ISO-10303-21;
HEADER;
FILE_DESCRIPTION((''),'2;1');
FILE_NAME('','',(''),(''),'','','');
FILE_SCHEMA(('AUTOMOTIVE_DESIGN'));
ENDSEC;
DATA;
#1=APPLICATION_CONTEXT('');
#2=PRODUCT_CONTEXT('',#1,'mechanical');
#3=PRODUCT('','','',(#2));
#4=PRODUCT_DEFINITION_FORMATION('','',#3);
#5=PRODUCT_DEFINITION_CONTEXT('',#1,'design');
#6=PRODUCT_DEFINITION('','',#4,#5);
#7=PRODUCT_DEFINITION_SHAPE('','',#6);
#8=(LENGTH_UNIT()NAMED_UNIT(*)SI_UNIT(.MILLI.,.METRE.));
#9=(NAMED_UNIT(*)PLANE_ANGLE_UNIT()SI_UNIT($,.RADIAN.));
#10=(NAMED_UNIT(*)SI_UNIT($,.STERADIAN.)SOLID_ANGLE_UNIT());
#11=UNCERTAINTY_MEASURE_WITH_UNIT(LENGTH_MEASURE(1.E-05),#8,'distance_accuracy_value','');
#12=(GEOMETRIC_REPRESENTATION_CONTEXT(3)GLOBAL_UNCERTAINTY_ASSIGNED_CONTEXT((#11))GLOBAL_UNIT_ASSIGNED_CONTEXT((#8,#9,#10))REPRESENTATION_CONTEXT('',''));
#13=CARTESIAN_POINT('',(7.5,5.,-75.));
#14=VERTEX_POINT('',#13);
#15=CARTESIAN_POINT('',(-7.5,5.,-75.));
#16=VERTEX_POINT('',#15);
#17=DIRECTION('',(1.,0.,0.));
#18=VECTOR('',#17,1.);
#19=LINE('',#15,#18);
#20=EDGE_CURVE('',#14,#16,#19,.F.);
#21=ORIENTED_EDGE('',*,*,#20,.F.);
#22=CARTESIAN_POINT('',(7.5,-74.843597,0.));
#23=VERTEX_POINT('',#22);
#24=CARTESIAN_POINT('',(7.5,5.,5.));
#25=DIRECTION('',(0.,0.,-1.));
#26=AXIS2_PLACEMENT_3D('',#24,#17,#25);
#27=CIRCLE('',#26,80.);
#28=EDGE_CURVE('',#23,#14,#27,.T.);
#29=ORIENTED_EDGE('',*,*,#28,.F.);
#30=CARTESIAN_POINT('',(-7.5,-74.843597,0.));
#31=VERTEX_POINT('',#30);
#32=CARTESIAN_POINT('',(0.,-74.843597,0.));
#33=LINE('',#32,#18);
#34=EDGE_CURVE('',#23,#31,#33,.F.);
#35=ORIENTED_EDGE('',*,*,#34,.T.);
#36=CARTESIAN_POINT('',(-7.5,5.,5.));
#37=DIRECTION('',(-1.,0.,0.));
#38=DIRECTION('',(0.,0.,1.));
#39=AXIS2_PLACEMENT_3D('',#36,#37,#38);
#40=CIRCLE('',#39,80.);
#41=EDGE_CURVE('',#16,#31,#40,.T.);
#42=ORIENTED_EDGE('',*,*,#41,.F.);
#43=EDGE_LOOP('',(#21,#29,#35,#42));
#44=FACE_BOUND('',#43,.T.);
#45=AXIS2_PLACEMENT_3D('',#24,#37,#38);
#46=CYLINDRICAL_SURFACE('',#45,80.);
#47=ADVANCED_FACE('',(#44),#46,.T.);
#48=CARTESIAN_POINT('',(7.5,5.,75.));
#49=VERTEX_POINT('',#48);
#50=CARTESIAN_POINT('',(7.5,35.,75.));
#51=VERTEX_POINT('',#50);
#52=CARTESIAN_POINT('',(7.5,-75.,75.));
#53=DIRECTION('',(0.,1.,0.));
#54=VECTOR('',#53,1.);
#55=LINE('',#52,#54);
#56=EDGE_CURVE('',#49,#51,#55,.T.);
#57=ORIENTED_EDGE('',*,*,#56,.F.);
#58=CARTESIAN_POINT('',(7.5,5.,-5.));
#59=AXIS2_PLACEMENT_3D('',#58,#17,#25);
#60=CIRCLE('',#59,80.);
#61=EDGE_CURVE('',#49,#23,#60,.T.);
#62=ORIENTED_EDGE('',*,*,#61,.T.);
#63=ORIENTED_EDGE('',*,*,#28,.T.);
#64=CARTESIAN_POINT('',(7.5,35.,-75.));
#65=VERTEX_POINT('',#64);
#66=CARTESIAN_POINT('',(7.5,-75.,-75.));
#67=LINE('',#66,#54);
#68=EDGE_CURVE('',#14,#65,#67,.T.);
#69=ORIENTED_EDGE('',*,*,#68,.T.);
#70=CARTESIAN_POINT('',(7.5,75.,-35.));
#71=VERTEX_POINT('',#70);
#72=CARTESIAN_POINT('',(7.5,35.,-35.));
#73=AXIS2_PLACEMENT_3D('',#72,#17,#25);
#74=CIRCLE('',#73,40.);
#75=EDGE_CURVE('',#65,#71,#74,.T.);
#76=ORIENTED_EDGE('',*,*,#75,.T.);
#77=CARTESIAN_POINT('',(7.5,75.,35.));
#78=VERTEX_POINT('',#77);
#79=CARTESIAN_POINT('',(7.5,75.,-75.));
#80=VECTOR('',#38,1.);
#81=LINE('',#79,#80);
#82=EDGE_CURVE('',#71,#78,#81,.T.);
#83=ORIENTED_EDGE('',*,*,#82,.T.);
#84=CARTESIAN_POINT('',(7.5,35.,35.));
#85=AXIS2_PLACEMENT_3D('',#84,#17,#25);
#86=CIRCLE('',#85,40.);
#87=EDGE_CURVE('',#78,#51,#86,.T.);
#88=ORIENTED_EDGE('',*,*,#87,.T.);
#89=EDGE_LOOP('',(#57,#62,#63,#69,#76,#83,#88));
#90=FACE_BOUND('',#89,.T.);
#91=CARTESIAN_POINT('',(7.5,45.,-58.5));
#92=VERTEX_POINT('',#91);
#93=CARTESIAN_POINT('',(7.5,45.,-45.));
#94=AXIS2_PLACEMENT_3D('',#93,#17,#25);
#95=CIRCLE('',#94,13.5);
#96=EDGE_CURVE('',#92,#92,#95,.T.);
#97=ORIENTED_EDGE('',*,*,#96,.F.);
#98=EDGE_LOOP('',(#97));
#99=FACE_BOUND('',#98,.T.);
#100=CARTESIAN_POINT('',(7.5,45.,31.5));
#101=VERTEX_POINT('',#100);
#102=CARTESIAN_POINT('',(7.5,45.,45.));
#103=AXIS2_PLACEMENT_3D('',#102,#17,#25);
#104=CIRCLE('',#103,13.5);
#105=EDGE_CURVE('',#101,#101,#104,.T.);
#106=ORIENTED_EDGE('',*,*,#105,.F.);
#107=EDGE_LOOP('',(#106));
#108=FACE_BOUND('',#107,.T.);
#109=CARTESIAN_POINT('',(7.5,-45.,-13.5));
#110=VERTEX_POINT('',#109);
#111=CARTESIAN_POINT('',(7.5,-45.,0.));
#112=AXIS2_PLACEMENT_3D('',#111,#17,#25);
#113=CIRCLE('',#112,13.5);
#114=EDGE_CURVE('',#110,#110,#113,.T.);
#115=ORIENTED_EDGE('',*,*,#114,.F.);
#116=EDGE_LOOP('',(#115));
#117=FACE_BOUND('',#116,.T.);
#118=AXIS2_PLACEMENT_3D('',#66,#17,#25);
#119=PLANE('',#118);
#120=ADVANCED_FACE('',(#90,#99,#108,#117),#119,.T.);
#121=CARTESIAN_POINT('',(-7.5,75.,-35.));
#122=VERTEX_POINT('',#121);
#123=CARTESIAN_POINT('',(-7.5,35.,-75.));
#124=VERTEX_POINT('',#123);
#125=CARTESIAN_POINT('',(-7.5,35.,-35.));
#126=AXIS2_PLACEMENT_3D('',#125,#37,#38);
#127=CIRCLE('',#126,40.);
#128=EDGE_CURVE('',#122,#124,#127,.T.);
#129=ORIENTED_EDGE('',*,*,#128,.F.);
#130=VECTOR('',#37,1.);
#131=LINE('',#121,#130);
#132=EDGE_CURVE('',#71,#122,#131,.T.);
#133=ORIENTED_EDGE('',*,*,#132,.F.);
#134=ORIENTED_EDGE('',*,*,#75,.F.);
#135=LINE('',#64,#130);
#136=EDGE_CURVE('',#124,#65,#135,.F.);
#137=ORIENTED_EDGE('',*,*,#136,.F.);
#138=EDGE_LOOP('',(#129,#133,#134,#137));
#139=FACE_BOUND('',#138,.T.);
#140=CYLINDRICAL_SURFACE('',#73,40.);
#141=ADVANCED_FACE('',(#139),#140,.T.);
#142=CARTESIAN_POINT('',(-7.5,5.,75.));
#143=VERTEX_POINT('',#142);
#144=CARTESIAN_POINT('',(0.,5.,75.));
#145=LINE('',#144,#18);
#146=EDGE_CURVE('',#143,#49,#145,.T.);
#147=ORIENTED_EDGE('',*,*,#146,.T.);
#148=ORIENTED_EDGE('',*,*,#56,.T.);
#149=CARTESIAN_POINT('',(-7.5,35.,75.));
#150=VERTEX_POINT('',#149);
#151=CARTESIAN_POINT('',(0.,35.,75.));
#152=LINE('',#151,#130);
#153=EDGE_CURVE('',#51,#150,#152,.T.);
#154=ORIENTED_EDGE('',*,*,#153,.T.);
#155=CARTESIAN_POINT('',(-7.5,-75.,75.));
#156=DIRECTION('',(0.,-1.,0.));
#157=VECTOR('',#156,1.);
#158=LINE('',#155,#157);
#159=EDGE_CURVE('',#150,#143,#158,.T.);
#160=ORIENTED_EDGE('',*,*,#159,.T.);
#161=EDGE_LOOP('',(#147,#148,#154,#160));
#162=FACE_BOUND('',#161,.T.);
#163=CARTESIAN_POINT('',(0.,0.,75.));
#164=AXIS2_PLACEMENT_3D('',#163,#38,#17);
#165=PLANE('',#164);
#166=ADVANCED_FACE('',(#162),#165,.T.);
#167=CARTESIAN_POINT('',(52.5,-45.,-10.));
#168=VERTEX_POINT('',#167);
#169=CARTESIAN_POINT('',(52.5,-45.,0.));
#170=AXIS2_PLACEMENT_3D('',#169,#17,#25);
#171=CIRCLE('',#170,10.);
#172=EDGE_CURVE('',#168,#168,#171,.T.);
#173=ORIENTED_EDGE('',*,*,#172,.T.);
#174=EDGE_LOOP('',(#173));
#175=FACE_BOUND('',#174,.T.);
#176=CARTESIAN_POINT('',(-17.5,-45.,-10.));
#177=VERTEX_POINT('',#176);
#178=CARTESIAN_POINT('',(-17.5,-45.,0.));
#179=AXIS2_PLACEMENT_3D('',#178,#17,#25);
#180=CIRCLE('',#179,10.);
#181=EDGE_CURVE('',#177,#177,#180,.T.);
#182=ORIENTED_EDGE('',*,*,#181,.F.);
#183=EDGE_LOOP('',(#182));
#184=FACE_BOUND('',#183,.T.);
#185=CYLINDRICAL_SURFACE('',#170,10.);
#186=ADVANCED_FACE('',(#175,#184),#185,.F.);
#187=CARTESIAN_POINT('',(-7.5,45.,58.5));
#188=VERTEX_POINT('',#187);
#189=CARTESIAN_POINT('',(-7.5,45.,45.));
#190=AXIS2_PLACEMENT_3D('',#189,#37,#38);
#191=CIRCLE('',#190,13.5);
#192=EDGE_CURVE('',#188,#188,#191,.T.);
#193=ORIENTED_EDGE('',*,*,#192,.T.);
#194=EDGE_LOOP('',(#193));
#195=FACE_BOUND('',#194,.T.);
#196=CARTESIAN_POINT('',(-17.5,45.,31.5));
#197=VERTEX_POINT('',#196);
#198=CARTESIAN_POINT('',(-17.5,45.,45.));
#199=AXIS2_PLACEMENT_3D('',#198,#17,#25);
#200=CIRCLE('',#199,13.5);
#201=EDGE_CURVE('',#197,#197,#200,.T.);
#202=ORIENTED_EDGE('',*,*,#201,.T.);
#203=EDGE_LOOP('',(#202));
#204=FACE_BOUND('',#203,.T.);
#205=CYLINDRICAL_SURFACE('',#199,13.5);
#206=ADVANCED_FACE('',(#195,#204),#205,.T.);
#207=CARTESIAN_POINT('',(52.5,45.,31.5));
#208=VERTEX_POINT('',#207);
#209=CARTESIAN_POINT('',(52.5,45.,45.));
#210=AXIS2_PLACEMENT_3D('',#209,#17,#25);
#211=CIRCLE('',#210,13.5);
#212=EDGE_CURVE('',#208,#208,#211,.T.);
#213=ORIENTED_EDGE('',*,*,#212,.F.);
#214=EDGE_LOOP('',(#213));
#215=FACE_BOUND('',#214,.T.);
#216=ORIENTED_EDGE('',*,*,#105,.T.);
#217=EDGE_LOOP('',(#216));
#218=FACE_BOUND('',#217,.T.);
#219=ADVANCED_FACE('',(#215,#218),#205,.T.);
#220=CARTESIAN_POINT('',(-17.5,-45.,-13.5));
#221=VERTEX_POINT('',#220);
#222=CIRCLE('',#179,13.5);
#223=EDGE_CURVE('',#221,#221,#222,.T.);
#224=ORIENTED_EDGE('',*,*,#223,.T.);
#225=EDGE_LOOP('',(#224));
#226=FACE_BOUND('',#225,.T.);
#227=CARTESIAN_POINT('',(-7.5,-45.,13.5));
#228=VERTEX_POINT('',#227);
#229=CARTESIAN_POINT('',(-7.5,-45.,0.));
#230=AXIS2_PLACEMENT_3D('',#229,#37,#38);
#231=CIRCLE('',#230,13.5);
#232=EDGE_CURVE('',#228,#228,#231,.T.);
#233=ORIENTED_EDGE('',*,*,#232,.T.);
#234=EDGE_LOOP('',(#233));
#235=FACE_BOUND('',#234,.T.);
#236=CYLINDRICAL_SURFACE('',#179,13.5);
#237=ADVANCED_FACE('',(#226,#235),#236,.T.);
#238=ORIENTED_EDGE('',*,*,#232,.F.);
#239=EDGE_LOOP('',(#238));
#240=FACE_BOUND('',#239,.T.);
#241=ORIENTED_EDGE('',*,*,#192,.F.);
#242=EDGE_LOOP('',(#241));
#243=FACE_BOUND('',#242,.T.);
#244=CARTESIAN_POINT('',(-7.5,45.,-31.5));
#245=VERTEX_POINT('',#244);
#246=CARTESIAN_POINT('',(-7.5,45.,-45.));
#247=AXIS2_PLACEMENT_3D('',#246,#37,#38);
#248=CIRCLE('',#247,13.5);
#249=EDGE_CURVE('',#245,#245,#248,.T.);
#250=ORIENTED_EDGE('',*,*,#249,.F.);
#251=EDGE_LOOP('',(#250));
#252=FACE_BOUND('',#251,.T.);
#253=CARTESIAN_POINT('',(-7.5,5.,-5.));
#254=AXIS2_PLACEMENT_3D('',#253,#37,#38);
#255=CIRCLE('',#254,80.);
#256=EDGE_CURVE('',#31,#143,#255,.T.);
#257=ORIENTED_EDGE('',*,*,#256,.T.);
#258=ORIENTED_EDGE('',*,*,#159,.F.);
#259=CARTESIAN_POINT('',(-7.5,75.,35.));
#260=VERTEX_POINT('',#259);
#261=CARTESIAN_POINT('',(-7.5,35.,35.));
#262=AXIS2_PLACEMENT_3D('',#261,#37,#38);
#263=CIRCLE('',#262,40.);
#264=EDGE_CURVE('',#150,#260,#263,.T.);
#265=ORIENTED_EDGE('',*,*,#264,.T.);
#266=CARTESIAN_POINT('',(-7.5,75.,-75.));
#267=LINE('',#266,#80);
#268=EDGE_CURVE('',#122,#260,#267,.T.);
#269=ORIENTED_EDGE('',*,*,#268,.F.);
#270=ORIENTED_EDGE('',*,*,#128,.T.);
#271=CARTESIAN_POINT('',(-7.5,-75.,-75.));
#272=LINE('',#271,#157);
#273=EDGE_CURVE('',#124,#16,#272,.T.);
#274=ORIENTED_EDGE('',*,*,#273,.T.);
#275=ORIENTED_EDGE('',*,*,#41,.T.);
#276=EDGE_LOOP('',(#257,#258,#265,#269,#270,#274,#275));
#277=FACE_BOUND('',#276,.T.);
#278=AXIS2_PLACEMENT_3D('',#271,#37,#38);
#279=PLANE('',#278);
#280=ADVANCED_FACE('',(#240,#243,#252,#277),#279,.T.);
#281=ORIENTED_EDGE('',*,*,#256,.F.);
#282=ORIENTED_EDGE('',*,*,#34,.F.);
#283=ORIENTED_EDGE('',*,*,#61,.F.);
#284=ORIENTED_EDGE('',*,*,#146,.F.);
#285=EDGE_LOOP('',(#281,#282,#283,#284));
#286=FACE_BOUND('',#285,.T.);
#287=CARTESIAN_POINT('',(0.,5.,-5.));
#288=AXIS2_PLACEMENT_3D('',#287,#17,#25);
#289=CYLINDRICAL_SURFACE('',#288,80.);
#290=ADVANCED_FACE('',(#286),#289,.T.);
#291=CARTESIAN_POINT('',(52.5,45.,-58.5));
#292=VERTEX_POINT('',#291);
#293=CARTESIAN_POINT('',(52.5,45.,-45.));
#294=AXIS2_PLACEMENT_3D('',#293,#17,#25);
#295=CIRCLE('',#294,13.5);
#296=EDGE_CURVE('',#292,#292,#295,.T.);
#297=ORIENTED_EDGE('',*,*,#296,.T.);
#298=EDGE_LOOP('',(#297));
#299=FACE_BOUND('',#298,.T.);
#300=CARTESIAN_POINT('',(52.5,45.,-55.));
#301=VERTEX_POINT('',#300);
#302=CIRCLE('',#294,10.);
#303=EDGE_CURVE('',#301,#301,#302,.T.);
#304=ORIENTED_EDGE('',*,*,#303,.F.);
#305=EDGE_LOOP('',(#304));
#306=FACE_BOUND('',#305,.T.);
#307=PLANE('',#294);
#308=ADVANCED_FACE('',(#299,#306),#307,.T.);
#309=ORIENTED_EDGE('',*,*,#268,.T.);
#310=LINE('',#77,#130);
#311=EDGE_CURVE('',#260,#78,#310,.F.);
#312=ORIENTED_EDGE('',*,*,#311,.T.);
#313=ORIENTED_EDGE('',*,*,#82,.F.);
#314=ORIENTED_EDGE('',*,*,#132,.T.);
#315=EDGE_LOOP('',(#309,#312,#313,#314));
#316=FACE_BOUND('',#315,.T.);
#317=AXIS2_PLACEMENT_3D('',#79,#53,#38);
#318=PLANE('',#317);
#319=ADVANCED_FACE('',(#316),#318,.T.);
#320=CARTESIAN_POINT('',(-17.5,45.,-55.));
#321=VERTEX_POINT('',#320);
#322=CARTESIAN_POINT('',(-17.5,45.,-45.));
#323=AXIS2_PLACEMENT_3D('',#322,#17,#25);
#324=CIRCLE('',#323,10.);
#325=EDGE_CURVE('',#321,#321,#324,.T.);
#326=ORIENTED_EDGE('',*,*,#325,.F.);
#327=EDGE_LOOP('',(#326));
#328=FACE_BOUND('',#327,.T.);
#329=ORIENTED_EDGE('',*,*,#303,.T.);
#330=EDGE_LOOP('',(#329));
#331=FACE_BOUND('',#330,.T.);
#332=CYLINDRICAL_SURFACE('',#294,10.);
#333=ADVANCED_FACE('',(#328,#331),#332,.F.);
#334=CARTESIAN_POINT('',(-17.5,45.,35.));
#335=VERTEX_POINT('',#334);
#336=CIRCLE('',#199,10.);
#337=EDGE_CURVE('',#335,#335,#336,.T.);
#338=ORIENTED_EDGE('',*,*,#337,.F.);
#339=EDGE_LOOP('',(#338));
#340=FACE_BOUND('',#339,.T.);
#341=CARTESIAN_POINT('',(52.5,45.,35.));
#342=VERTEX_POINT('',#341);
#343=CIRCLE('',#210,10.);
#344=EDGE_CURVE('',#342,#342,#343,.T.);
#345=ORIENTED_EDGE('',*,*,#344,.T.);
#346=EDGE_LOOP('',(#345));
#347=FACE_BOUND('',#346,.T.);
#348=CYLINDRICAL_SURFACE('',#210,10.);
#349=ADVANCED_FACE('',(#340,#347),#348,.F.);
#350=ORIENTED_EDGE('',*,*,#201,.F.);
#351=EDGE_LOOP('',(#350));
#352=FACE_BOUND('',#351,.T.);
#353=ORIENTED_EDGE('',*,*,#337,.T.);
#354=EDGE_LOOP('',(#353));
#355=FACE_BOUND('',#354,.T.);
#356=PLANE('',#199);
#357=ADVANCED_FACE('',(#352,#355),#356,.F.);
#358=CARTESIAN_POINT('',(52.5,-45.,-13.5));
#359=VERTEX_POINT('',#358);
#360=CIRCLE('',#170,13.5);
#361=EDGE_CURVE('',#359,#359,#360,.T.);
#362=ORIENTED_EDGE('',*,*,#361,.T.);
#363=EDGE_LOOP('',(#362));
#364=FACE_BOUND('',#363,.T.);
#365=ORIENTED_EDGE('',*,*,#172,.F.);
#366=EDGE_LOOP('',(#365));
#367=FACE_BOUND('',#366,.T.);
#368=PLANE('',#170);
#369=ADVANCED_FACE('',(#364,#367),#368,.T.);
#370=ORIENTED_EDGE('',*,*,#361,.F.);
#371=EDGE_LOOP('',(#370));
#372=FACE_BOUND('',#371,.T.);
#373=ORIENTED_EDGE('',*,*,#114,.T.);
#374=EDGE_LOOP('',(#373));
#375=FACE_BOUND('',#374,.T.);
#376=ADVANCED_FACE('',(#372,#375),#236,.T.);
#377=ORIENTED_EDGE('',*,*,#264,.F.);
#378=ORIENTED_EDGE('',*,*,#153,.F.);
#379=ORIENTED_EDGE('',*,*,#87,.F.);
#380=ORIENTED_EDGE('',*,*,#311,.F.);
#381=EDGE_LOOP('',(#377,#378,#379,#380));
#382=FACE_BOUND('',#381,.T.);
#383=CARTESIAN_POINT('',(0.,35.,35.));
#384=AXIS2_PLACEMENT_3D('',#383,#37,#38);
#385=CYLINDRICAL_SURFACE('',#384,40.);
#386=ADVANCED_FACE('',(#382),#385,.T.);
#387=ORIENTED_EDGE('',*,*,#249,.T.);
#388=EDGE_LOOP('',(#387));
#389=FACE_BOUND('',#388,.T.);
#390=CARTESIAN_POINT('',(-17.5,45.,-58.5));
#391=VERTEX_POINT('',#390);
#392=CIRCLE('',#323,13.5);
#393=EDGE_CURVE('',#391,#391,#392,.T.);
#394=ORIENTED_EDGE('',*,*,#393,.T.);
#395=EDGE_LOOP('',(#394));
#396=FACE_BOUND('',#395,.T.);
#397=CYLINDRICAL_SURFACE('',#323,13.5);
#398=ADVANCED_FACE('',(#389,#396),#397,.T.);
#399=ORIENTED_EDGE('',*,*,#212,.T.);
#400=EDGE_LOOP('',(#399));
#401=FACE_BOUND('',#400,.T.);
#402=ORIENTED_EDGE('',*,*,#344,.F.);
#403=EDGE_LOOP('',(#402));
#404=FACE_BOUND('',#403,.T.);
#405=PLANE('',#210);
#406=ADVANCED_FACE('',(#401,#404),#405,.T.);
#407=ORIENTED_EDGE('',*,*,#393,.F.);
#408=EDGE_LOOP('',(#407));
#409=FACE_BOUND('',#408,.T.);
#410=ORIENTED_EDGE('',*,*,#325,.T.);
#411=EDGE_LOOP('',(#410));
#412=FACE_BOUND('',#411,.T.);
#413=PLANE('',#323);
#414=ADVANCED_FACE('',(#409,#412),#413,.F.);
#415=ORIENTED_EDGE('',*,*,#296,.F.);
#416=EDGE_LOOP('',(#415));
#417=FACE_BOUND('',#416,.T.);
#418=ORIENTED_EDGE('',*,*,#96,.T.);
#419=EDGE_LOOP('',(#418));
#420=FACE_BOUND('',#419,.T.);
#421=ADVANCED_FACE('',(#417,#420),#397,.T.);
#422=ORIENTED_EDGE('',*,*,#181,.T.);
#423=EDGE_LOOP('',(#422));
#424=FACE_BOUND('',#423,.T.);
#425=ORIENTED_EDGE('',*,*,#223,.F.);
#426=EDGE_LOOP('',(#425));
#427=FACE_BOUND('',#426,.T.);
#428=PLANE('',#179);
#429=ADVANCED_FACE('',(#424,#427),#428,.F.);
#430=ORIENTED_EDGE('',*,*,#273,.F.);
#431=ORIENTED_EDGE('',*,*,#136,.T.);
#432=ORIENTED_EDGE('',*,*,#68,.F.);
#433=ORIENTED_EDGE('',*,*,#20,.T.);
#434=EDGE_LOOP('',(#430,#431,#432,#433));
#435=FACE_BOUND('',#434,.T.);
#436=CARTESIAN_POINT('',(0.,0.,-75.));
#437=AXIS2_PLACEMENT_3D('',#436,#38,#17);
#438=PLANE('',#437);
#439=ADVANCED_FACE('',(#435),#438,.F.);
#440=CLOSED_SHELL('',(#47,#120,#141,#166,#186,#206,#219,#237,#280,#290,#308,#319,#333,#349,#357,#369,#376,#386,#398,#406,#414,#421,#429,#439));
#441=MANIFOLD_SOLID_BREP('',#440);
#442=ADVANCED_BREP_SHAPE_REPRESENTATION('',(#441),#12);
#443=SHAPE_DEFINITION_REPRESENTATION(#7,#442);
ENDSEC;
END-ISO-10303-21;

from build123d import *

# Parameters (mm, degrees)
BOSS_EXTRUDE1_DEPTH      = 75
BOSS_EXTRUDE1_DEPTH_BACK = 75
SKETCH1_W                = 15
SKETCH1_H                = 150
BOSS_EXTRUDE2_DEPTH      = 45
BOSS_EXTRUDE2_DEPTH_BACK = 25
SKETCH2_R                = 13.5
F_20_0MM_DOWEL_HOLE1_D   = 20
FILLET2_R                = 80
FILLET3_R                = 40


with BuildPart() as part:
    # Sketch1 → Boss-Extrude1 (new, two sides: drawn at the far end of the back side and taken through both)
    with BuildSketch(Plane.XY.offset(-BOSS_EXTRUDE1_DEPTH_BACK)):
        Rectangle(SKETCH1_W, SKETCH1_H)
    extrude(amount=BOSS_EXTRUDE1_DEPTH + BOSS_EXTRUDE1_DEPTH_BACK)

    # Sketch2 → Boss-Extrude2 (add, two sides: drawn at the far end of the back side and taken through both)
    with BuildSketch(Plane(origin=(7.5, 0, 0), x_dir=(0, 0, -1), z_dir=(1, 0, 0)).offset(-BOSS_EXTRUDE2_DEPTH_BACK)):
        with Locations((0, -45)):
            Circle(SKETCH2_R)
        with Locations((-45, 45)):
            Circle(SKETCH2_R)
        with Locations((45, 45)):
            Circle(SKETCH2_R)
    extrude(amount=BOSS_EXTRUDE2_DEPTH + BOSS_EXTRUDE2_DEPTH_BACK)

    # Ø20.0mm Dowel Hole1 (through all)
    with Locations(Plane(origin=(52.5, 0, 0), x_dir=(0, 0, -1), z_dir=(1, 0, 0))):
        with Locations((-45, 45), (45, 45), (0, -45)):
            Hole(F_20_0MM_DOWEL_HOLE1_D / 2)

    # Fillet2
    # the kernel refuses this fillet: 80 mm, written as the material it takes off along each edge
    with BuildSketch(Plane(origin=(207.5, -75, -75), x_dir=(0, 0, 1), z_dir=(-1, 0, 0))) as fillet2_piece_1:
        with BuildLine():
            CenterArc((FILLET2_R, FILLET2_R), FILLET2_R, 180, 90)
            Line((0, FILLET2_R), (0, 0))
            Line((0, 0), (FILLET2_R, 0))
        make_face()
    extrude(amount=415, mode=Mode.SUBTRACT)
    with BuildSketch(Plane(origin=(207.5, -75, 75), x_dir=(0, 0, -1), z_dir=(-1, 0, 0))) as fillet2_piece_2:
        with BuildLine():
            CenterArc((FILLET2_R, -FILLET2_R), FILLET2_R, 90, 90)
            Line((0, -FILLET2_R), (0, 0))
            Line((0, 0), (FILLET2_R, 0))
        make_face()
    extrude(amount=415, mode=Mode.SUBTRACT)

    # Fillet3
    fillet3_edges = [part.edges().sort_by_distance(p)[0] for p in [
        (0, 75, 75),
        (0, 75, -75),
    ]]
    fillet(fillet3_edges, radius=FILLET3_R)


solid = part.part
